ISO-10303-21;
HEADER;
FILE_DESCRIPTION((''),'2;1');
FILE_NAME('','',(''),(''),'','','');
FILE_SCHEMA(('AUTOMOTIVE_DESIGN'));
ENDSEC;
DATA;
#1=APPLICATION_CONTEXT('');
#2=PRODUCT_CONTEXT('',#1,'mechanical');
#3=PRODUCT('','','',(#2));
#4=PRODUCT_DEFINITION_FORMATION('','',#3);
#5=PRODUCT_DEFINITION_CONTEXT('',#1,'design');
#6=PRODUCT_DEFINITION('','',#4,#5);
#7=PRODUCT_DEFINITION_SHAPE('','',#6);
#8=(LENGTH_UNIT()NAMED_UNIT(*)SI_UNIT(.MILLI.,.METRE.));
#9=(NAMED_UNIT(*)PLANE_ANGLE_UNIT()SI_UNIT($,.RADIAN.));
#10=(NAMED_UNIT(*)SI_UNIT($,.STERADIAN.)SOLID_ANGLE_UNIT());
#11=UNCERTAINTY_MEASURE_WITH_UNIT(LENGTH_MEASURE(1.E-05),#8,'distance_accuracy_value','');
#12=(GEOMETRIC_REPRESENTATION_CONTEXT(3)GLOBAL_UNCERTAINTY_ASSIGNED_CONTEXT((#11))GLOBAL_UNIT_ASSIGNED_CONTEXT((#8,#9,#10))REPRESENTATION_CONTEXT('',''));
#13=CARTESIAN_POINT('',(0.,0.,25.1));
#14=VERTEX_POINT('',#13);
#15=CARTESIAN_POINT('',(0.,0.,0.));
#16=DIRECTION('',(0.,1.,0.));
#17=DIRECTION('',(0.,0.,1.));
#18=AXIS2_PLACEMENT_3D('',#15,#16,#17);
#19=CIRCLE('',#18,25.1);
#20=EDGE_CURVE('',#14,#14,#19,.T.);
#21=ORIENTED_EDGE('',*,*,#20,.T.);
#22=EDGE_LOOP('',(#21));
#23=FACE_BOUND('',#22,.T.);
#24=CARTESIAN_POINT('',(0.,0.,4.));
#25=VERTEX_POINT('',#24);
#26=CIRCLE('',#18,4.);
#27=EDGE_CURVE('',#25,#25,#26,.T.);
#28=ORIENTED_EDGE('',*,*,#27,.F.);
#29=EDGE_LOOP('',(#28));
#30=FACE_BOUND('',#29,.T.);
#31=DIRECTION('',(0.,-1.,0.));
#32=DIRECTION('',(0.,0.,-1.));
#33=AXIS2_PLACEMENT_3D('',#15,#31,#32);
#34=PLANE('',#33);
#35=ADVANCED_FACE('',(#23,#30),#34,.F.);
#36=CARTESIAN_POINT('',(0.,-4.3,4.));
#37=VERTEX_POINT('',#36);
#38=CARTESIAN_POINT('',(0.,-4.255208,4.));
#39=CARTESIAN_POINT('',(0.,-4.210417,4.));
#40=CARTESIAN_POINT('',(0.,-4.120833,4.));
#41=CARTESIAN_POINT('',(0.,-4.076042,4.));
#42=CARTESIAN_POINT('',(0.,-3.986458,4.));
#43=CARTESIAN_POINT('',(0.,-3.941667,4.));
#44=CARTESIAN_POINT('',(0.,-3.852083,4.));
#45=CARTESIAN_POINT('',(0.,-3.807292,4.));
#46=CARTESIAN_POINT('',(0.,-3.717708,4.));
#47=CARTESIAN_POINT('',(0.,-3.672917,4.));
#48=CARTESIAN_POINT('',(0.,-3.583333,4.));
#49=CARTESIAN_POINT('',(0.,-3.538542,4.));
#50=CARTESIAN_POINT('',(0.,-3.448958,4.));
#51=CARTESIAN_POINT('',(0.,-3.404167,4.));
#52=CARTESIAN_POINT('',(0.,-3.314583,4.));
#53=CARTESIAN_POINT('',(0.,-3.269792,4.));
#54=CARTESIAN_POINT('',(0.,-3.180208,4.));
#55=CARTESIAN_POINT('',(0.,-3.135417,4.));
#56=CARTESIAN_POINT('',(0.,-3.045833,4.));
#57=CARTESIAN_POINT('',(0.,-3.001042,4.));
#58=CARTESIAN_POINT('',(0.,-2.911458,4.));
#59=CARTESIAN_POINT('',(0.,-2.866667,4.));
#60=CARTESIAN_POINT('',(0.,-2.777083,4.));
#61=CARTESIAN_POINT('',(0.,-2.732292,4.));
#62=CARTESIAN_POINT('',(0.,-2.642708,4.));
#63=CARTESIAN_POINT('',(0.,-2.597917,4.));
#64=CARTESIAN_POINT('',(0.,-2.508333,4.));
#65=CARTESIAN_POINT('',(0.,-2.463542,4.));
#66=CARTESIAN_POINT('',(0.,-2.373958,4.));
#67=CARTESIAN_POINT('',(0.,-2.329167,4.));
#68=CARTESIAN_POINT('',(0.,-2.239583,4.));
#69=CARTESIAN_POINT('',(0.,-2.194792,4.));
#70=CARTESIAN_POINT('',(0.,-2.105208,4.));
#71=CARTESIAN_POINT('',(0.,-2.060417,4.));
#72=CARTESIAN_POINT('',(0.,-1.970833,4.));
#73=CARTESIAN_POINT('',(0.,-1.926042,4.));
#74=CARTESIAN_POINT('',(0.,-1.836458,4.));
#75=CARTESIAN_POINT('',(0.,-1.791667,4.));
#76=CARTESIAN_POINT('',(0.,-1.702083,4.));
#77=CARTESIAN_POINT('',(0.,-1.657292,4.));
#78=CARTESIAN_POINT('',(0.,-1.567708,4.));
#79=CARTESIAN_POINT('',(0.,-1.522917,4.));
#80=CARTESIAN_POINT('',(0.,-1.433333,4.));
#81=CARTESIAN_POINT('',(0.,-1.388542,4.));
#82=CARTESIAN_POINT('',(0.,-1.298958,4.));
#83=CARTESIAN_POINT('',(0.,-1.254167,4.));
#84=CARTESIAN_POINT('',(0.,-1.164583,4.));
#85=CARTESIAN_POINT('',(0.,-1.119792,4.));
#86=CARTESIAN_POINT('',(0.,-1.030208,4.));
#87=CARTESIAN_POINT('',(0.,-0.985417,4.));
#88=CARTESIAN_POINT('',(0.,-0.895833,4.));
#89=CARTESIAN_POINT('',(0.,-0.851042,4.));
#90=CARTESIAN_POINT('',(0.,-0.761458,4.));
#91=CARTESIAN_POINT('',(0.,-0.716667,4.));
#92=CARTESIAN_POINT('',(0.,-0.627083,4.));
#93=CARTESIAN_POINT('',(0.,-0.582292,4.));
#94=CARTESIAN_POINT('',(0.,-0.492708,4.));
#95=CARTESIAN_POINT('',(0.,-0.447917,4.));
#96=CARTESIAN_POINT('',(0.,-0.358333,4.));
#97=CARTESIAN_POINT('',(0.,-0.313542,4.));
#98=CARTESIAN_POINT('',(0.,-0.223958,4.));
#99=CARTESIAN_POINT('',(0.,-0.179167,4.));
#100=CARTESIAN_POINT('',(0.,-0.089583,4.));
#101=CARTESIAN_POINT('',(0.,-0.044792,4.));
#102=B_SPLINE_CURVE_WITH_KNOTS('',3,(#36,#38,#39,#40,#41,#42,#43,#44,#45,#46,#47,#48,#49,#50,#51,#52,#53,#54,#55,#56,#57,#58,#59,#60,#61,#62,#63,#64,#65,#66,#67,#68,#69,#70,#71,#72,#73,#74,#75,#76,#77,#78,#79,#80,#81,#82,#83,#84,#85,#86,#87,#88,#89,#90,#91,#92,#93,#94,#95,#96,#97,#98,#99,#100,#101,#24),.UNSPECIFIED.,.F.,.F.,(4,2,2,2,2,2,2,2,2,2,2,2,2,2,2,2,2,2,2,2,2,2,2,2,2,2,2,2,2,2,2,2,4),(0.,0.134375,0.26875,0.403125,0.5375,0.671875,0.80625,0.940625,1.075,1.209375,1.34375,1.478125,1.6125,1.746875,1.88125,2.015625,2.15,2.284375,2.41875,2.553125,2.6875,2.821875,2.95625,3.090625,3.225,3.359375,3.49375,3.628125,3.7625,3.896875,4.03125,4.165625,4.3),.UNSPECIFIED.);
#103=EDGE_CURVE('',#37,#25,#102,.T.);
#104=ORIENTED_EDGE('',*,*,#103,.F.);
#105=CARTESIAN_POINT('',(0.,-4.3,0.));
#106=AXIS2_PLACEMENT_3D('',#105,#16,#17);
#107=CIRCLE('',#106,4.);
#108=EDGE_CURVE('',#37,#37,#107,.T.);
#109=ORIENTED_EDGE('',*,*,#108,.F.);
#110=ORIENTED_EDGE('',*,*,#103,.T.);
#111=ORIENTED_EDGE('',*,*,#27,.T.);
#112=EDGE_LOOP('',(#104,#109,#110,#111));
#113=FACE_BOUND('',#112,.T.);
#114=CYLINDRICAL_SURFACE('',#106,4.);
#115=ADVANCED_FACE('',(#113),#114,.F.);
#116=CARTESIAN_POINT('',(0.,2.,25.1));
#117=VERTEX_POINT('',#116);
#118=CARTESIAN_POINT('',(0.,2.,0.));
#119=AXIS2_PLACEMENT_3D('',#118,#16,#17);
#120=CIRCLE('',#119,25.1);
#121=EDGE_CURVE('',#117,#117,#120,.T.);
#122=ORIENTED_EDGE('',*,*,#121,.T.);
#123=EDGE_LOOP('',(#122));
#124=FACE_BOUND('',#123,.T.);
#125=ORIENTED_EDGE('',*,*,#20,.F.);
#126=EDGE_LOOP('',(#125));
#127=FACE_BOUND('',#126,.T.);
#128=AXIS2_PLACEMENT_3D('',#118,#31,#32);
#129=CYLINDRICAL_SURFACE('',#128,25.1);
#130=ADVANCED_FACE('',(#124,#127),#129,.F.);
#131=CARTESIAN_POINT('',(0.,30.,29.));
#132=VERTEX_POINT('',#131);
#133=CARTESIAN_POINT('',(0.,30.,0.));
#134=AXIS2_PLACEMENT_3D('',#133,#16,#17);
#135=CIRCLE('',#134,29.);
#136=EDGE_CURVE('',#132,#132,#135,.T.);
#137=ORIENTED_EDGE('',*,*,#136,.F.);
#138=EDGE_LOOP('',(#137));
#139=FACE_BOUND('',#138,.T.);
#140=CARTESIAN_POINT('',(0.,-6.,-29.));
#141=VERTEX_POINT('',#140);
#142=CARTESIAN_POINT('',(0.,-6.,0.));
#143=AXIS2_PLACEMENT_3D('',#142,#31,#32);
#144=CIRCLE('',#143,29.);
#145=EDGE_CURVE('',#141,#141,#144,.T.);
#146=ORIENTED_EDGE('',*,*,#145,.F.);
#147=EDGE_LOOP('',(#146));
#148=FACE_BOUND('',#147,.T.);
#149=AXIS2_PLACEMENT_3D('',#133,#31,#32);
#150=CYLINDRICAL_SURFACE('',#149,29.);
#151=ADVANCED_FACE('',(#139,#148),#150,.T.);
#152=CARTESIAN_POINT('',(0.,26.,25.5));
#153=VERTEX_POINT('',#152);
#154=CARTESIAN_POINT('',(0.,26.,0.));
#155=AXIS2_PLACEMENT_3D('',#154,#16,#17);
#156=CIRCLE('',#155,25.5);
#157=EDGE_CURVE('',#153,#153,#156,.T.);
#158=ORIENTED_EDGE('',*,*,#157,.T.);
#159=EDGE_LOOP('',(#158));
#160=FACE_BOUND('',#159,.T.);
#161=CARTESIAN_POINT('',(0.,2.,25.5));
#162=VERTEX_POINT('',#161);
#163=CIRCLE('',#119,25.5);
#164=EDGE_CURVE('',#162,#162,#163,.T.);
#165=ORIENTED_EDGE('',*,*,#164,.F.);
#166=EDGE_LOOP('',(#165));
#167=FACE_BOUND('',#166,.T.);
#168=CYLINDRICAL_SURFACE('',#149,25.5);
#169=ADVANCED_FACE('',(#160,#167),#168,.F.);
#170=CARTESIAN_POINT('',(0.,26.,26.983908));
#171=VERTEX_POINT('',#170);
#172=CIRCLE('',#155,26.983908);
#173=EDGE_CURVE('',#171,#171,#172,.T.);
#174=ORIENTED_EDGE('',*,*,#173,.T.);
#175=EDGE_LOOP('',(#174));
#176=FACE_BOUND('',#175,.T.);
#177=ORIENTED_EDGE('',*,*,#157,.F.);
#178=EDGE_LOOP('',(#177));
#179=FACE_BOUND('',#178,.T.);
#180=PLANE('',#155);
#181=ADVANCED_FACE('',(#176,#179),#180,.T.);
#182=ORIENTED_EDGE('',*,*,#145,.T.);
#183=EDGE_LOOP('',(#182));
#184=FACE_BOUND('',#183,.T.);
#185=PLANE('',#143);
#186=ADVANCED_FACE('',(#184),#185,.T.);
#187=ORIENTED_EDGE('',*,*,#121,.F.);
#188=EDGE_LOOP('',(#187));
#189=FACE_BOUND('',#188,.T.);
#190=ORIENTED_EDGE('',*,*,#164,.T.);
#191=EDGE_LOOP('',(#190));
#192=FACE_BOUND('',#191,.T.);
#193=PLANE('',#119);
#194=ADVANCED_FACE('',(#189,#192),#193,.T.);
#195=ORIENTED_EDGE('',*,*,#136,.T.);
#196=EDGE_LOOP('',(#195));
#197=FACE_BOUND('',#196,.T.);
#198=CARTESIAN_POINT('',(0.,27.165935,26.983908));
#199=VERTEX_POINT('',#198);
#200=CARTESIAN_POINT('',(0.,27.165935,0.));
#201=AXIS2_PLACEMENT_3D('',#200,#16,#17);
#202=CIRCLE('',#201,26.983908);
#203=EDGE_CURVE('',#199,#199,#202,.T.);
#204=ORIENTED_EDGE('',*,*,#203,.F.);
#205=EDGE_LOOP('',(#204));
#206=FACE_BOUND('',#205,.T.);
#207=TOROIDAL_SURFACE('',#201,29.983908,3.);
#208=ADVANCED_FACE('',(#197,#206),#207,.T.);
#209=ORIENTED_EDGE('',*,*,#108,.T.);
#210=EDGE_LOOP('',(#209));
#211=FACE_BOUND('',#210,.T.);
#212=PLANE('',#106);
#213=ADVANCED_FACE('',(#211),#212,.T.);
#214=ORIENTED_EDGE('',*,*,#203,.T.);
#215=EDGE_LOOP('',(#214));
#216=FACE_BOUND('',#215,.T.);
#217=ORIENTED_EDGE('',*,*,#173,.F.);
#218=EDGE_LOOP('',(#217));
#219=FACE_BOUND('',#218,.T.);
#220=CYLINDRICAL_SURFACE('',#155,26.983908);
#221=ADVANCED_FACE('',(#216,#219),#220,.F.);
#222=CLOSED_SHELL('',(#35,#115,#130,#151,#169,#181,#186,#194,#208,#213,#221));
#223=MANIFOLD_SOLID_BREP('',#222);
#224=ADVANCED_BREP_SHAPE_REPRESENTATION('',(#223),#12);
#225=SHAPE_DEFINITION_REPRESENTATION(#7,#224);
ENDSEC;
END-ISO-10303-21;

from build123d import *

# Parameters (mm, degrees)
SKETCH1_R           = 29
SKETCH1_R_2         = 25.5
BOSS_EXTRUDE1_DEPTH = 30
CUT_EXTRUDE1_START  = -4
SKETCH2_R           = 26.983908251
SKETCH2_R_2         = 25.5
CUT_EXTRUDE1_DEPTH  = 4
BOSS_EXTRUDE2_START = 6
SKETCH3_R           = 29
BOSS_EXTRUDE2_DEPTH = 6
SKETCH4_R           = 4
CUT_EXTRUDE2_DEPTH  = 4.3
SKETCH5_R           = 25.5
SKETCH5_R_2         = 25.1
BOSS_EXTRUDE3_DEPTH = 2


with BuildPart() as part:
    # Sketch1 → Boss-Extrude1 (new body)
    with BuildSketch(Plane(origin=(0, 0, 0), x_dir=(1, 0, 0), z_dir=(0, 1, 0))):
        with Locations(Location((0, 0, 0), (0, 0, 270))):
            Circle(SKETCH1_R)
        with Locations(Location((0, 0, 0), (0, 0, 270))):
            Circle(SKETCH1_R_2, mode=Mode.SUBTRACT)
    extrude(amount=BOSS_EXTRUDE1_DEPTH)

    # Sketch2 → Cut-Extrude1 (cut)
    with BuildSketch(Plane(origin=(0, 30, 0), x_dir=(1, 0, 0), z_dir=(0, 1, 0)).offset(CUT_EXTRUDE1_START)):
        with Locations(Location((0, 0, 0), (0, 0, 270))):
            Circle(SKETCH2_R)
        with Locations(Location((0, 0, 0), (0, 0, 270))):
            Circle(SKETCH2_R_2, mode=Mode.SUBTRACT)
    extrude(amount=CUT_EXTRUDE1_DEPTH, mode=Mode.SUBTRACT)

    # Fillet1: read off the stored shape, not the designer's step
    # Fillet1 outline → Fillet1 (revolve, cut)
    with BuildSketch(Plane.XY):
        with BuildLine():
            ThreePointArc((26.983908251, 27.165934977), (27.539350545, 28.904939757), (29, 30))
            Line((29, 30), (26.983908251, 30))
            Line((26.983908251, 30), (26.983908251, 27.165934977))
        make_face()
    revolve(axis=Axis((0, 0, 0), (0, 1, 0)), mode=Mode.SUBTRACT)

    # Sketch3 → Boss-Extrude2 (add)
    with BuildSketch(Plane.XZ.offset(BOSS_EXTRUDE2_START)):
        with Locations(Location((0, 0, 0), (0, 0, 270))):
            Circle(SKETCH3_R)
    extrude(amount=-BOSS_EXTRUDE2_DEPTH)

    # Sketch4 → Cut-Extrude2 (cut)
    with BuildSketch(Plane(origin=(0, 0, 0), x_dir=(1, 0, 0), z_dir=(0, 1, 0))):
        with Locations(Location((0, 0, 0), (0, 0, 270))):
            Circle(SKETCH4_R)
    extrude(amount=-CUT_EXTRUDE2_DEPTH, mode=Mode.SUBTRACT)

    # Sketch5 → Boss-Extrude3 (add)
    with BuildSketch(Plane(origin=(0, 0, 0), x_dir=(1, 0, 0), z_dir=(0, 1, 0))):
        with Locations(Location((0, 0, 0), (0, 0, 270))):
            Circle(SKETCH5_R)
        with Locations(Location((0, 0, 0), (0, 0, 270))):
            Circle(SKETCH5_R_2, mode=Mode.SUBTRACT)
    extrude(amount=BOSS_EXTRUDE3_DEPTH)


solid = part.part
